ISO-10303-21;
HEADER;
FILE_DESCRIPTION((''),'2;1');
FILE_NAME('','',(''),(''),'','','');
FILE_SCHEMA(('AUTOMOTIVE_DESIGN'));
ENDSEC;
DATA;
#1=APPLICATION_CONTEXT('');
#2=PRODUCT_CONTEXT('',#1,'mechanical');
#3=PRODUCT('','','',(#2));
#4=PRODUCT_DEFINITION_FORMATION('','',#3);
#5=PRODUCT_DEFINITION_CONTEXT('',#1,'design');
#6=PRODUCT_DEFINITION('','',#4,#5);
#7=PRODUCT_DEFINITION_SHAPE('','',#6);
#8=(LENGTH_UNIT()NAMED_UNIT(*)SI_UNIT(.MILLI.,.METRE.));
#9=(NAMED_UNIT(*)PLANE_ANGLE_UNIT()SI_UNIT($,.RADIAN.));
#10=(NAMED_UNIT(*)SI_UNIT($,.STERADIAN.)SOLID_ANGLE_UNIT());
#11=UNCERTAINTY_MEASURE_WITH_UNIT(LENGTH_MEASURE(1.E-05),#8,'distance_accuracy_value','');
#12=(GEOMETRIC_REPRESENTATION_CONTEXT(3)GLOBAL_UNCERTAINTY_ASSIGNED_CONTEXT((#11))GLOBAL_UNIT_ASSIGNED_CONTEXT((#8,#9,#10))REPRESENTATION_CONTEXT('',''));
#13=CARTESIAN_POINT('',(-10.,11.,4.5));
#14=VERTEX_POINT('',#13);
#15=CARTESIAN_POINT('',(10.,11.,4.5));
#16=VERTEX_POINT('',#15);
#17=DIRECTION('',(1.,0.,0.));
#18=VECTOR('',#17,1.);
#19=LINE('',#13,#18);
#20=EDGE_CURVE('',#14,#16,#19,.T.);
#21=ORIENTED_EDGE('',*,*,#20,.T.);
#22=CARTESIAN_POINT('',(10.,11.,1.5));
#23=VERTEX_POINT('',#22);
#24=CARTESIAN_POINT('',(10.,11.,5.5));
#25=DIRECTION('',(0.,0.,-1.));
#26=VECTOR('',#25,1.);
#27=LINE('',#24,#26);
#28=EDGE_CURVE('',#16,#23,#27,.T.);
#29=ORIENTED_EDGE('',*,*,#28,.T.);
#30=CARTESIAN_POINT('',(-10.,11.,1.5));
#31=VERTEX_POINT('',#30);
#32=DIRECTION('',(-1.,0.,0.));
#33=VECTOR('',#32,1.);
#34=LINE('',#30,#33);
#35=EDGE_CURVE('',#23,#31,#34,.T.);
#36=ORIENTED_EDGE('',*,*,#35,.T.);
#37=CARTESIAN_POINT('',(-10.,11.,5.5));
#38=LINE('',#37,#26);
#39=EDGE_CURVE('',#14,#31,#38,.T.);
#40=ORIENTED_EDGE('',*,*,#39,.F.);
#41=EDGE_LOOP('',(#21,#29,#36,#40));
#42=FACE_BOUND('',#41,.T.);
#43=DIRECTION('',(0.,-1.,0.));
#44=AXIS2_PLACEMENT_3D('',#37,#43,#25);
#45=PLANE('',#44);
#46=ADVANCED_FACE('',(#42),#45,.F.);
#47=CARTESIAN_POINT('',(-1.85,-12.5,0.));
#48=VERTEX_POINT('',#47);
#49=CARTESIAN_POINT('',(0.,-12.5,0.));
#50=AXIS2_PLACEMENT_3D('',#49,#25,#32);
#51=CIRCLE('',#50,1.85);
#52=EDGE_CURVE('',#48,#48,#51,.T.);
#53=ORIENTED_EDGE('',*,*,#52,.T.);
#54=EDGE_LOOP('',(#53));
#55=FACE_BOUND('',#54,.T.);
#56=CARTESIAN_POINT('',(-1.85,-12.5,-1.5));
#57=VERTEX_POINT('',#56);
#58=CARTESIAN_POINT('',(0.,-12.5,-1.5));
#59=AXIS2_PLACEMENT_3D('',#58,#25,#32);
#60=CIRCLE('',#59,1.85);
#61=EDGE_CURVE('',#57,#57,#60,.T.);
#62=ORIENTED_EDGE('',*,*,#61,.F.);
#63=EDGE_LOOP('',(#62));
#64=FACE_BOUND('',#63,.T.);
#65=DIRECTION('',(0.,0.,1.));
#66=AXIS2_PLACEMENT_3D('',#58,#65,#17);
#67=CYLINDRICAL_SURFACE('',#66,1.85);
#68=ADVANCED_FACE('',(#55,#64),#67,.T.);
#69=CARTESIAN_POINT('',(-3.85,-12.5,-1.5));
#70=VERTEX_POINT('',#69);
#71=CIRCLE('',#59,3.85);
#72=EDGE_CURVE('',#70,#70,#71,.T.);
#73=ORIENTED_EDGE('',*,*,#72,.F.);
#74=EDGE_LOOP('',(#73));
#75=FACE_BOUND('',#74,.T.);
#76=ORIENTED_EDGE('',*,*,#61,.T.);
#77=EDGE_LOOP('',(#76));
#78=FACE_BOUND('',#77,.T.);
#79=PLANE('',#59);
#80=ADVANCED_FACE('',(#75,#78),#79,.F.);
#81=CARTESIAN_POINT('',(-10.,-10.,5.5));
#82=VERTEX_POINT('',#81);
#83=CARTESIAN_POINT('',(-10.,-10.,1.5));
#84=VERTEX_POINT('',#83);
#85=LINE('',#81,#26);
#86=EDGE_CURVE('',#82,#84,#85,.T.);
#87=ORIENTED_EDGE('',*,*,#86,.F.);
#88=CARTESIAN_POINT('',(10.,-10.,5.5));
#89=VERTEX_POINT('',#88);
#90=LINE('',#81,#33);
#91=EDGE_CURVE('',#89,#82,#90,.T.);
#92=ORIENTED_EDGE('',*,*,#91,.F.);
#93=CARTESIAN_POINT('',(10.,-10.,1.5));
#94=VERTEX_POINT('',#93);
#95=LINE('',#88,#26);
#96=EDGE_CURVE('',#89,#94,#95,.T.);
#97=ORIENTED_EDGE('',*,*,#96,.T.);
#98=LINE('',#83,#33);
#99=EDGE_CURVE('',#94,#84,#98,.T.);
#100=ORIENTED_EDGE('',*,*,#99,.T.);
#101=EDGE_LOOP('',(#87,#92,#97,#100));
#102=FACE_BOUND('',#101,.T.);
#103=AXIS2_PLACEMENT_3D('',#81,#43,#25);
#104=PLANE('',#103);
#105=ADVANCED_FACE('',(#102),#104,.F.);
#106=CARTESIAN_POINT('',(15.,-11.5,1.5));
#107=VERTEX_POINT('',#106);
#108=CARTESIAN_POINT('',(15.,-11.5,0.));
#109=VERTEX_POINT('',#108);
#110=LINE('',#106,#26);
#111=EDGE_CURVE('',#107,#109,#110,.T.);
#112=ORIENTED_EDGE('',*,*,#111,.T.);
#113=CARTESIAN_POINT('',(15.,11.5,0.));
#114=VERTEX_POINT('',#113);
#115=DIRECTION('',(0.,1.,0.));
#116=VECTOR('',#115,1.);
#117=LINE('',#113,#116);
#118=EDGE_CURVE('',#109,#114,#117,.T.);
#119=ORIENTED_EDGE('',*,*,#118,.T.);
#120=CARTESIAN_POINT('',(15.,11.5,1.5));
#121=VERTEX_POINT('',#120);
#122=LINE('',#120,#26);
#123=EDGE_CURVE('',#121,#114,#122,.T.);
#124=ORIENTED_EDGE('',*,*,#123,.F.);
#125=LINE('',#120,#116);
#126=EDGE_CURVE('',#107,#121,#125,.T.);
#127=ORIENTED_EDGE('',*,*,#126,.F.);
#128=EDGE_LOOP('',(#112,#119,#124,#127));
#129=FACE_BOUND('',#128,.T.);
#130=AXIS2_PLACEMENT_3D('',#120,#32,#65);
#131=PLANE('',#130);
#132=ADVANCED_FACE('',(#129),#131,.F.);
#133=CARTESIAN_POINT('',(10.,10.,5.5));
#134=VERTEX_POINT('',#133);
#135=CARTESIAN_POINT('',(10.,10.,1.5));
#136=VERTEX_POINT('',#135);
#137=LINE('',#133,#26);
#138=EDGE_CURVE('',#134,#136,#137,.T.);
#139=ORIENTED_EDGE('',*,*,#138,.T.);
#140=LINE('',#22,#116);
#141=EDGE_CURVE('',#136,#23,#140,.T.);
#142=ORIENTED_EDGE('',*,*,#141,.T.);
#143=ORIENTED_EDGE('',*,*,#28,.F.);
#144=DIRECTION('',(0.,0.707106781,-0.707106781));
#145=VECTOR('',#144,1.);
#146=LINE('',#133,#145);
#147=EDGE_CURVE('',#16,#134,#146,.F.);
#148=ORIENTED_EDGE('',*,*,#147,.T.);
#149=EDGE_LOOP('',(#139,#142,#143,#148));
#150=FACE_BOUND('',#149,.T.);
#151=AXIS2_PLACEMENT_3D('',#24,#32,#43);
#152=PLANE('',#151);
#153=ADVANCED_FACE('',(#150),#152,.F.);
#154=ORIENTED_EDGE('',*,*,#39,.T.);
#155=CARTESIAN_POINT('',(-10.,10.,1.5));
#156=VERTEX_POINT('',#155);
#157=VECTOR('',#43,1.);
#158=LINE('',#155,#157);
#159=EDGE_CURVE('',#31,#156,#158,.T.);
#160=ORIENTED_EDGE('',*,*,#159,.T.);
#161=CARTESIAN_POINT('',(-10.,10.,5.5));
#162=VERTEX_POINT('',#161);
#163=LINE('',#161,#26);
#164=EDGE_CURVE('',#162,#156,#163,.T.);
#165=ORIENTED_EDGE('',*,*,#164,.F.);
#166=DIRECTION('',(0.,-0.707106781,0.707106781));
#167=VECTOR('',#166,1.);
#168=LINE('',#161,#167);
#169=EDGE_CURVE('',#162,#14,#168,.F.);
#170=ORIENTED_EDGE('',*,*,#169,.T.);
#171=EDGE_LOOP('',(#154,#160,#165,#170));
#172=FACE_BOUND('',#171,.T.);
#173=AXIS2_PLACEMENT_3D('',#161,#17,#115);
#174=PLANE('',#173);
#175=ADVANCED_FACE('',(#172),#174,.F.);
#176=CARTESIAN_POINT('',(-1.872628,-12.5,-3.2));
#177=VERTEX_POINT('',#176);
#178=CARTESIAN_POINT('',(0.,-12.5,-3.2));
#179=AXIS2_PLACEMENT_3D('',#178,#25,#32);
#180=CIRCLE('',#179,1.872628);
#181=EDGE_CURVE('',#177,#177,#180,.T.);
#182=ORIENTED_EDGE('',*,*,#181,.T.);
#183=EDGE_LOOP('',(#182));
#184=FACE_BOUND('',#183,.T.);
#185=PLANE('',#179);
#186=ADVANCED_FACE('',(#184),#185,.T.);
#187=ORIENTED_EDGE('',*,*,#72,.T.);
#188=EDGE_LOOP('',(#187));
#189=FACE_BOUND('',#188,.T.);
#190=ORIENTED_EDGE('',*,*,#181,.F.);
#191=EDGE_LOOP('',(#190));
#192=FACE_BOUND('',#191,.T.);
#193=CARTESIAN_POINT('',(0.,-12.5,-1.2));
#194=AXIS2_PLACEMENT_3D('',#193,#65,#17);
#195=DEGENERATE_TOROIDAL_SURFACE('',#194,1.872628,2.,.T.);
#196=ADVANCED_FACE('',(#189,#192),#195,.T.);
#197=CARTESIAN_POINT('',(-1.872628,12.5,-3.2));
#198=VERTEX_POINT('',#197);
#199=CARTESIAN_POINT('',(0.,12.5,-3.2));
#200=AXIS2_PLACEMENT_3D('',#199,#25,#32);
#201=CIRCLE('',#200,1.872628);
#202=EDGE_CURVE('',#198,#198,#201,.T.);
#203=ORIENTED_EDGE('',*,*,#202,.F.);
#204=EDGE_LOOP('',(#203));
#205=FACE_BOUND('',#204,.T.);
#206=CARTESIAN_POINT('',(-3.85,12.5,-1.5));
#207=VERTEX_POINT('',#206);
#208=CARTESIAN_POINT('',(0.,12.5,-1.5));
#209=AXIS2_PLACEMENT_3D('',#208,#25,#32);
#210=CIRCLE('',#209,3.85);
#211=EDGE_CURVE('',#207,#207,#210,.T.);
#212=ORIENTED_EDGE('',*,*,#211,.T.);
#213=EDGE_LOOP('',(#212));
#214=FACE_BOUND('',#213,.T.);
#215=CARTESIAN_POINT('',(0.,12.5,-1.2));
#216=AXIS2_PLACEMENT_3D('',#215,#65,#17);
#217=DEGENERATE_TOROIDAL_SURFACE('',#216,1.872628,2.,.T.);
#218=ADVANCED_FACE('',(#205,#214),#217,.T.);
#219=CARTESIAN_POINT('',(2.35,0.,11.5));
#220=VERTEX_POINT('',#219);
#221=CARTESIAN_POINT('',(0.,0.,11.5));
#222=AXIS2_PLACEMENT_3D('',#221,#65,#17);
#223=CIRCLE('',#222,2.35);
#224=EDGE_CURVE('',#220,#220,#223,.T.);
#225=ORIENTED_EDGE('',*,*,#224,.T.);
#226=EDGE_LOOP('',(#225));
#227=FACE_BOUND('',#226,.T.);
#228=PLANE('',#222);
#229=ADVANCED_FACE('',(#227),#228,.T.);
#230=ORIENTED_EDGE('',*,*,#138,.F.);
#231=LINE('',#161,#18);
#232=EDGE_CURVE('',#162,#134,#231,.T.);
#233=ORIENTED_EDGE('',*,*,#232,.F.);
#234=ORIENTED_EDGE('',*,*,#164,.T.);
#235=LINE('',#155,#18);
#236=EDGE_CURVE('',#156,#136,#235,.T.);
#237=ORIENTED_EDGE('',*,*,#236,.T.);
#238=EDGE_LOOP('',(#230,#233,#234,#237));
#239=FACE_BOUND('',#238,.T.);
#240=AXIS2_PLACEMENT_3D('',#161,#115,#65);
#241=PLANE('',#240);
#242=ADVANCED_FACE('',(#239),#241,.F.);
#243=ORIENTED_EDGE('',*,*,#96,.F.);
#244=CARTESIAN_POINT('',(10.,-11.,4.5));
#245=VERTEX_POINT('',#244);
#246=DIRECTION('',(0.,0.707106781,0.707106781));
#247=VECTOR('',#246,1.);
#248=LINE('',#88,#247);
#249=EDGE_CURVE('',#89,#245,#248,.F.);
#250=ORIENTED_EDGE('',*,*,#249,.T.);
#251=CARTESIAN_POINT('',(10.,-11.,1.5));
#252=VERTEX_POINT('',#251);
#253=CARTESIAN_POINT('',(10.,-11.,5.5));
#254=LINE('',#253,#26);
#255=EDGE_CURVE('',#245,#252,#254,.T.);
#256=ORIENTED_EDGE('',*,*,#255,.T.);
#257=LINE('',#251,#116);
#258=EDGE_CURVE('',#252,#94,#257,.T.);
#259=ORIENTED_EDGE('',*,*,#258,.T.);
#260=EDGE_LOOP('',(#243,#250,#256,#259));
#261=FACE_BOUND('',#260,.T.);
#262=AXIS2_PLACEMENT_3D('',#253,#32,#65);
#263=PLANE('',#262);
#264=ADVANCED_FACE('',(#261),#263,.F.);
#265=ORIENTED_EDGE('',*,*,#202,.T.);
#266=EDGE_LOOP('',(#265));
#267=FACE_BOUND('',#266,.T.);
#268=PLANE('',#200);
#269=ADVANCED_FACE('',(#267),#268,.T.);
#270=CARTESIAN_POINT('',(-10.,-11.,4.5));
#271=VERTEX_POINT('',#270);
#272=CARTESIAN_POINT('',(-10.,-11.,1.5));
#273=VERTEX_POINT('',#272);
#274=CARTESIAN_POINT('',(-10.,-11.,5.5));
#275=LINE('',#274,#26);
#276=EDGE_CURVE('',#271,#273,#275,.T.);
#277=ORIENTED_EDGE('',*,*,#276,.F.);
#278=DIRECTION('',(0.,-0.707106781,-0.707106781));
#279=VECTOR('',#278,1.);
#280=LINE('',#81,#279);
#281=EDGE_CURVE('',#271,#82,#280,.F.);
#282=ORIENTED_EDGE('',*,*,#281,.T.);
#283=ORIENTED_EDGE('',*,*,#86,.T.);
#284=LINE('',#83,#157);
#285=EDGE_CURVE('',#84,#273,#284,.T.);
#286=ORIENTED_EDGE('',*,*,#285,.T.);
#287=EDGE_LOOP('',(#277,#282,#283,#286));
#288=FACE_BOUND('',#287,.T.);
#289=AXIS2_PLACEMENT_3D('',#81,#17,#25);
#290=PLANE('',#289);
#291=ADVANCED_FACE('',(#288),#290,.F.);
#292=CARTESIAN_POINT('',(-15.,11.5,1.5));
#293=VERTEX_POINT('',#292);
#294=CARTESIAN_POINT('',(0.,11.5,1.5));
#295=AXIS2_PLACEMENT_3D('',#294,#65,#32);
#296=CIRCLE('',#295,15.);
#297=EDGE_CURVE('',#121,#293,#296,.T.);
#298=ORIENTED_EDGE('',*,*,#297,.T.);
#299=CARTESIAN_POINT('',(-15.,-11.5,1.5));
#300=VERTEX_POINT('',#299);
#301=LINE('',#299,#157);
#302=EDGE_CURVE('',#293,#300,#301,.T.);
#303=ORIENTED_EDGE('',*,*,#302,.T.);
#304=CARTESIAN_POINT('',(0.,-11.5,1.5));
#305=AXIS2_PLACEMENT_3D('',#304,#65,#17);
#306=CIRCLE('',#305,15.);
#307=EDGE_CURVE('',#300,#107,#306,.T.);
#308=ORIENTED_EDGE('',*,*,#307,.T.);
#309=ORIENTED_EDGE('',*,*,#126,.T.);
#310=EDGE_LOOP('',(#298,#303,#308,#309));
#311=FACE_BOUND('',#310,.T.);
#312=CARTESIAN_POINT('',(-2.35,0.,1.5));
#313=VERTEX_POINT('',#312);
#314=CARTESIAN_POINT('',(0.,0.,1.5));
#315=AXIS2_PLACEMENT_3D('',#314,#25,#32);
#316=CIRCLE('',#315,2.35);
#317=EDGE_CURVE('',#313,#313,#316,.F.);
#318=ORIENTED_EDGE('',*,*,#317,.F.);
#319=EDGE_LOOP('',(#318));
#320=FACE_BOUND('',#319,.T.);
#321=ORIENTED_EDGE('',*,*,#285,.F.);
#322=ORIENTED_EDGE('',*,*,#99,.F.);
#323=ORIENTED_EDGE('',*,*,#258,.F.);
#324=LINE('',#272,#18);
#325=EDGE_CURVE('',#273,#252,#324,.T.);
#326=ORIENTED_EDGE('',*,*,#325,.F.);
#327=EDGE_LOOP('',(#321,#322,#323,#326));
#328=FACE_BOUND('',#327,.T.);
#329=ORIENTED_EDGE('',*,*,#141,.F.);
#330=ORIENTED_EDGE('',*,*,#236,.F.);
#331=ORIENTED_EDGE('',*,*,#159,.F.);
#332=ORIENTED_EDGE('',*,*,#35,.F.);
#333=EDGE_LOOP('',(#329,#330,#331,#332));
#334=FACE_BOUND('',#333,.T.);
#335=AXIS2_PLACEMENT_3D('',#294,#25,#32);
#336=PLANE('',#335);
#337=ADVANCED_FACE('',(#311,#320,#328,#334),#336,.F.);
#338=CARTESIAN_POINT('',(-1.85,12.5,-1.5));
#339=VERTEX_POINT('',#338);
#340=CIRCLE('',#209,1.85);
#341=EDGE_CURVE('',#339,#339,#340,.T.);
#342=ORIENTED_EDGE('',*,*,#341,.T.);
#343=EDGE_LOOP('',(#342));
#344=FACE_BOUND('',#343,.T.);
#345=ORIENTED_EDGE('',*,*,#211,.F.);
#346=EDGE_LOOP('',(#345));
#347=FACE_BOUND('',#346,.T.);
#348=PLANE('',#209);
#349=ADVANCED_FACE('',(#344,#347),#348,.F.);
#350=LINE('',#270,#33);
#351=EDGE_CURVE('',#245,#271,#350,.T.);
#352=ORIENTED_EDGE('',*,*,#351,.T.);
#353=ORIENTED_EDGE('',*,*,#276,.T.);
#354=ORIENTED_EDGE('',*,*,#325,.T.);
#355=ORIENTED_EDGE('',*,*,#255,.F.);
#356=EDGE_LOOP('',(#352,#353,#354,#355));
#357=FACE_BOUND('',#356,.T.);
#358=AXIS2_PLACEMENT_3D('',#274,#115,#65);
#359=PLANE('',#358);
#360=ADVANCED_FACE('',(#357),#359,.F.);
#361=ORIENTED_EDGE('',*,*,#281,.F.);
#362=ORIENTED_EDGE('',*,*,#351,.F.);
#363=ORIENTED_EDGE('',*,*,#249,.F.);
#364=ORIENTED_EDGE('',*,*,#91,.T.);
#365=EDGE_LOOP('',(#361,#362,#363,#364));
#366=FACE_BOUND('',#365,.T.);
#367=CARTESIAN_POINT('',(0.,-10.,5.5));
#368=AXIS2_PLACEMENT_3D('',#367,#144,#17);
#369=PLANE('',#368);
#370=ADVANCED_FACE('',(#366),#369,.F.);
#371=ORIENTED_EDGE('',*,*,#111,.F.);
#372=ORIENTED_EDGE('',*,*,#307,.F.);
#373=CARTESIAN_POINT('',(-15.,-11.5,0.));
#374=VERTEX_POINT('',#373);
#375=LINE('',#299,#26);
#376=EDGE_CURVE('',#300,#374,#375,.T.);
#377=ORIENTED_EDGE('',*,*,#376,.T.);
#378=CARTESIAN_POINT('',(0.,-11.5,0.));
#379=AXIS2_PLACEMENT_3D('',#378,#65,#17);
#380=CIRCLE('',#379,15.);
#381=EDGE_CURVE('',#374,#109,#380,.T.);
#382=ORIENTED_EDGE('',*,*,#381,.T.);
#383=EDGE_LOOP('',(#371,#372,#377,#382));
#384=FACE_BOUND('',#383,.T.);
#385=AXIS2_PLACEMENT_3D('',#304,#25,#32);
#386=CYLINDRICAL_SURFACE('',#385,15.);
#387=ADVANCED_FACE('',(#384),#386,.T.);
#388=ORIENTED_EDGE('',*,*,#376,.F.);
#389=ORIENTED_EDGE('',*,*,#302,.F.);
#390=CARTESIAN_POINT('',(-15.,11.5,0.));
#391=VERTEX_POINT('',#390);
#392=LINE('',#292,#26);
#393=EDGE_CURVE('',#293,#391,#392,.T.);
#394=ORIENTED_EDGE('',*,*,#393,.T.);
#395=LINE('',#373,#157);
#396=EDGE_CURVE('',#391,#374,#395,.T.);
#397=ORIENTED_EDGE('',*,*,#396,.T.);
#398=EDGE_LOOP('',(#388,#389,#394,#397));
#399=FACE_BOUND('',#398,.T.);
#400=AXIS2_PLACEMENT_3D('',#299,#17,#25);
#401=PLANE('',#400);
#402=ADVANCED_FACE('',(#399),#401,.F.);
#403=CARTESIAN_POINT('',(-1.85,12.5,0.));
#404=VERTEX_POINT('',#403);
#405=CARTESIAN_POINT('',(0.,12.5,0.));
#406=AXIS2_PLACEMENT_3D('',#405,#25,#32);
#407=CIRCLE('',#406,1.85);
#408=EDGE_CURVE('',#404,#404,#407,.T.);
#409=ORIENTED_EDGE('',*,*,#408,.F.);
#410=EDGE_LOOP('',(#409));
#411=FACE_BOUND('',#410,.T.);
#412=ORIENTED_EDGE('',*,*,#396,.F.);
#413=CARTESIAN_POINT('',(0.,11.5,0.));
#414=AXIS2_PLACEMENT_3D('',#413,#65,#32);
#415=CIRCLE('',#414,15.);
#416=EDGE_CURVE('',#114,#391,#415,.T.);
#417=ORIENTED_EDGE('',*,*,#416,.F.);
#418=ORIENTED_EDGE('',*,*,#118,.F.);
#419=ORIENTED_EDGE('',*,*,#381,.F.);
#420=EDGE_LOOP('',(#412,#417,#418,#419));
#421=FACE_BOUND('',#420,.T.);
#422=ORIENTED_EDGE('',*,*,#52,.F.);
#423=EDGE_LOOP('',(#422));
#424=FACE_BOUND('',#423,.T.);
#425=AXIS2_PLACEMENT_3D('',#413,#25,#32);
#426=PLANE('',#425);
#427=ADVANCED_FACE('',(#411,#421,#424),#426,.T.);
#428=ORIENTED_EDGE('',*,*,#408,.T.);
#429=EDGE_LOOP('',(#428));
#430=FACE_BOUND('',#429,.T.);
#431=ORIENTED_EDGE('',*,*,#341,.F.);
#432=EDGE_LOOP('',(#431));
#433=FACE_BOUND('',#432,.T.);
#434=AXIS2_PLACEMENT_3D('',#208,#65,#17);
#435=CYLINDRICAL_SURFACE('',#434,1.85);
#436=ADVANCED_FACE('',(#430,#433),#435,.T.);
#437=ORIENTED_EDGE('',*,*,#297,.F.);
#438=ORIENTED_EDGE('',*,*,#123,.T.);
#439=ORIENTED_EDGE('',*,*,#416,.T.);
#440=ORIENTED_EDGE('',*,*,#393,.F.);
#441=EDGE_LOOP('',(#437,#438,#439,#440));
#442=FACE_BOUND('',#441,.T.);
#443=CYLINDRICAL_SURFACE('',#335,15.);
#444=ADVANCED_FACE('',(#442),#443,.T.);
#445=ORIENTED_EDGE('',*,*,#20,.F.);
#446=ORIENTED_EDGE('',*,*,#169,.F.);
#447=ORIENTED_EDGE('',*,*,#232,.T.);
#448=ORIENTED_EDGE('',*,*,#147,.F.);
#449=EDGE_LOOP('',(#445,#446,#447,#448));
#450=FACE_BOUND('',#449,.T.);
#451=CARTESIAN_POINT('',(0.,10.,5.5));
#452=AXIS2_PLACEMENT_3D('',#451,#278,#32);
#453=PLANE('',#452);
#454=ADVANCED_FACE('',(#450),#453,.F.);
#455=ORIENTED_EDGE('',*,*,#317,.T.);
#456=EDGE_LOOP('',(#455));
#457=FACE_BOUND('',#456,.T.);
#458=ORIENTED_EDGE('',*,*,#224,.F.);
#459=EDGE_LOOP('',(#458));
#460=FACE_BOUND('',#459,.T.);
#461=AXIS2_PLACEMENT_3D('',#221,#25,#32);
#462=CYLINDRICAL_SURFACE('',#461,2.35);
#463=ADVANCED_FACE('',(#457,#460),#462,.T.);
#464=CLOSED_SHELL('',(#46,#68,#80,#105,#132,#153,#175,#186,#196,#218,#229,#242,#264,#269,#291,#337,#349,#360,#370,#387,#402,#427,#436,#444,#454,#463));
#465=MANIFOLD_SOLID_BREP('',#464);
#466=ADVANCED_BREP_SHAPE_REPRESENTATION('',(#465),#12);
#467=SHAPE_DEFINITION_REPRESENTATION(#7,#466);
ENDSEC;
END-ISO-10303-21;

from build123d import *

# Parameters (mm, degrees)
DODANIE_WYCI_GNI_CIE2_DEPTH = 1.5
SZKIC37_R                   = 1.85
DODANIE_WYCI_GNI_CIE3_DEPTH = 1.5
SZKIC38_R                   = 3.85
DODANIE_WYCI_GNI_CIE4_DEPTH = 1.7
ZAOKR_GLENIE1_R             = 2
SZKIC39_R                   = 2.35
DODANIE_WYCI_GNI_CIE5_DEPTH = 10
SZKIC40_W                   = 20
SZKIC40_H                   = 1
DODANIE_WYCI_GNI_CIE6_DEPTH = 4
SFAZOWANIE1_SIZE            = 1


# Some blends are built 0.0001 mm under size
with BuildPart() as part:
    # Szkic35 → Dodanie-wyciągnięcie2 (new body)
    with BuildSketch(Plane.XY):
        with BuildLine():
            Line((-15, -11.5), (-15, 11.5))
            ThreePointArc((-15, 11.5), (0, 26.5), (15, 11.5))
            Line((15, 11.5), (15, -11.5))
            ThreePointArc((15, -11.5), (0, -26.5), (-15, -11.5))
        make_face()
    extrude(amount=DODANIE_WYCI_GNI_CIE2_DEPTH)

    # Szkic37 → Dodanie-wyciągnięcie3 (add)
    with BuildSketch(Plane(origin=(0, 0, 0), x_dir=(-1, 0, 0), z_dir=(0, 0, -1))):
        with Locations((0, 12.5)):
            Circle(SZKIC37_R)
        with Locations((0, -12.5)):
            Circle(SZKIC37_R)
    extrude(amount=DODANIE_WYCI_GNI_CIE3_DEPTH)

    # Szkic38 → Dodanie-wyciągnięcie4 (add)
    with BuildSketch(Plane(origin=(0, 0, -1.5), x_dir=(-1, 0, 0), z_dir=(0, 0, -1))):
        with Locations((0, 12.5)):
            Circle(SZKIC38_R)
        with Locations((0, -12.5)):
            Circle(SZKIC38_R)
    extrude(amount=DODANIE_WYCI_GNI_CIE4_DEPTH)

    # Zaokrąglenie1
    # the kernel refuses this fillet: 2 mm, written as the material it takes off along each edge
    with BuildSketch(Plane(origin=(0, 12.5, -3.2), x_dir=(-1, 0, 0), z_dir=(0, -1, 0))) as zaokr_glenie1_piece_1:
        with BuildLine():
            CenterArc((1.872628007, -2), ZAOKR_GLENIE1_R, 8.626926559, 81.373073441)
            Line((1.872628007, 0), (1.872628007, 0.04))
            Line((1.872628007, 0.04), (3.85, 0.04))
            Line((3.85, 0.04), (3.89, 0))
            ThreePointArc((3.89, 0), (3.89, -0.85), (3.88954744, -1.694))
            Line((3.88954744, -1.694), (3.85, -1.7))
        make_face()
    revolve(axis=Axis((0, 12.5, -3.2), (0, 0, -1)), mode=Mode.SUBTRACT)
    with BuildSketch(Plane(origin=(0, -12.5, -3.2), x_dir=(-1, 0, 0), z_dir=(0, -1, 0))) as zaokr_glenie1_piece_2:
        with BuildLine():
            CenterArc((1.872628007, -2), ZAOKR_GLENIE1_R, 8.626926559, 81.373073441)
            Line((1.872628007, 0), (1.872628007, 0.04))
            Line((1.872628007, 0.04), (3.85, 0.04))
            Line((3.85, 0.04), (3.89, 0))
            ThreePointArc((3.89, 0), (3.89, -0.85), (3.88954744, -1.694))
            Line((3.88954744, -1.694), (3.85, -1.7))
        make_face()
    revolve(axis=Axis((0, -12.5, -3.2), (0, 0, -1)), mode=Mode.SUBTRACT)

    # Szkic39 → Dodanie-wyciągnięcie5 (add)
    with BuildSketch(Plane.XY.offset(1.5)):
        with Locations(Location((0, 0, 0), (0, 0, 180))):
            Circle(SZKIC39_R)
    extrude(amount=DODANIE_WYCI_GNI_CIE5_DEPTH)

    # Szkic40 → Dodanie-wyciągnięcie6 (add)
    with BuildSketch(Plane.XY.offset(1.5)):
        with Locations((0, 10.5)):
            Rectangle(SZKIC40_W, SZKIC40_H)
        with Locations((0, -10.5)):
            Rectangle(SZKIC40_W, SZKIC40_H)
    extrude(amount=DODANIE_WYCI_GNI_CIE6_DEPTH)

    # Sfazowanie1
    sfazowanie1_edges = [part.edges().sort_by_distance(p)[0] for p in [
        (0, 11, 5.5),
        (0, -11, 5.5),
    ]]
    chamfer(sfazowanie1_edges, length=SFAZOWANIE1_SIZE - 0.0001)  # a hair under: the kernel refuses the full size


solid = part.part
